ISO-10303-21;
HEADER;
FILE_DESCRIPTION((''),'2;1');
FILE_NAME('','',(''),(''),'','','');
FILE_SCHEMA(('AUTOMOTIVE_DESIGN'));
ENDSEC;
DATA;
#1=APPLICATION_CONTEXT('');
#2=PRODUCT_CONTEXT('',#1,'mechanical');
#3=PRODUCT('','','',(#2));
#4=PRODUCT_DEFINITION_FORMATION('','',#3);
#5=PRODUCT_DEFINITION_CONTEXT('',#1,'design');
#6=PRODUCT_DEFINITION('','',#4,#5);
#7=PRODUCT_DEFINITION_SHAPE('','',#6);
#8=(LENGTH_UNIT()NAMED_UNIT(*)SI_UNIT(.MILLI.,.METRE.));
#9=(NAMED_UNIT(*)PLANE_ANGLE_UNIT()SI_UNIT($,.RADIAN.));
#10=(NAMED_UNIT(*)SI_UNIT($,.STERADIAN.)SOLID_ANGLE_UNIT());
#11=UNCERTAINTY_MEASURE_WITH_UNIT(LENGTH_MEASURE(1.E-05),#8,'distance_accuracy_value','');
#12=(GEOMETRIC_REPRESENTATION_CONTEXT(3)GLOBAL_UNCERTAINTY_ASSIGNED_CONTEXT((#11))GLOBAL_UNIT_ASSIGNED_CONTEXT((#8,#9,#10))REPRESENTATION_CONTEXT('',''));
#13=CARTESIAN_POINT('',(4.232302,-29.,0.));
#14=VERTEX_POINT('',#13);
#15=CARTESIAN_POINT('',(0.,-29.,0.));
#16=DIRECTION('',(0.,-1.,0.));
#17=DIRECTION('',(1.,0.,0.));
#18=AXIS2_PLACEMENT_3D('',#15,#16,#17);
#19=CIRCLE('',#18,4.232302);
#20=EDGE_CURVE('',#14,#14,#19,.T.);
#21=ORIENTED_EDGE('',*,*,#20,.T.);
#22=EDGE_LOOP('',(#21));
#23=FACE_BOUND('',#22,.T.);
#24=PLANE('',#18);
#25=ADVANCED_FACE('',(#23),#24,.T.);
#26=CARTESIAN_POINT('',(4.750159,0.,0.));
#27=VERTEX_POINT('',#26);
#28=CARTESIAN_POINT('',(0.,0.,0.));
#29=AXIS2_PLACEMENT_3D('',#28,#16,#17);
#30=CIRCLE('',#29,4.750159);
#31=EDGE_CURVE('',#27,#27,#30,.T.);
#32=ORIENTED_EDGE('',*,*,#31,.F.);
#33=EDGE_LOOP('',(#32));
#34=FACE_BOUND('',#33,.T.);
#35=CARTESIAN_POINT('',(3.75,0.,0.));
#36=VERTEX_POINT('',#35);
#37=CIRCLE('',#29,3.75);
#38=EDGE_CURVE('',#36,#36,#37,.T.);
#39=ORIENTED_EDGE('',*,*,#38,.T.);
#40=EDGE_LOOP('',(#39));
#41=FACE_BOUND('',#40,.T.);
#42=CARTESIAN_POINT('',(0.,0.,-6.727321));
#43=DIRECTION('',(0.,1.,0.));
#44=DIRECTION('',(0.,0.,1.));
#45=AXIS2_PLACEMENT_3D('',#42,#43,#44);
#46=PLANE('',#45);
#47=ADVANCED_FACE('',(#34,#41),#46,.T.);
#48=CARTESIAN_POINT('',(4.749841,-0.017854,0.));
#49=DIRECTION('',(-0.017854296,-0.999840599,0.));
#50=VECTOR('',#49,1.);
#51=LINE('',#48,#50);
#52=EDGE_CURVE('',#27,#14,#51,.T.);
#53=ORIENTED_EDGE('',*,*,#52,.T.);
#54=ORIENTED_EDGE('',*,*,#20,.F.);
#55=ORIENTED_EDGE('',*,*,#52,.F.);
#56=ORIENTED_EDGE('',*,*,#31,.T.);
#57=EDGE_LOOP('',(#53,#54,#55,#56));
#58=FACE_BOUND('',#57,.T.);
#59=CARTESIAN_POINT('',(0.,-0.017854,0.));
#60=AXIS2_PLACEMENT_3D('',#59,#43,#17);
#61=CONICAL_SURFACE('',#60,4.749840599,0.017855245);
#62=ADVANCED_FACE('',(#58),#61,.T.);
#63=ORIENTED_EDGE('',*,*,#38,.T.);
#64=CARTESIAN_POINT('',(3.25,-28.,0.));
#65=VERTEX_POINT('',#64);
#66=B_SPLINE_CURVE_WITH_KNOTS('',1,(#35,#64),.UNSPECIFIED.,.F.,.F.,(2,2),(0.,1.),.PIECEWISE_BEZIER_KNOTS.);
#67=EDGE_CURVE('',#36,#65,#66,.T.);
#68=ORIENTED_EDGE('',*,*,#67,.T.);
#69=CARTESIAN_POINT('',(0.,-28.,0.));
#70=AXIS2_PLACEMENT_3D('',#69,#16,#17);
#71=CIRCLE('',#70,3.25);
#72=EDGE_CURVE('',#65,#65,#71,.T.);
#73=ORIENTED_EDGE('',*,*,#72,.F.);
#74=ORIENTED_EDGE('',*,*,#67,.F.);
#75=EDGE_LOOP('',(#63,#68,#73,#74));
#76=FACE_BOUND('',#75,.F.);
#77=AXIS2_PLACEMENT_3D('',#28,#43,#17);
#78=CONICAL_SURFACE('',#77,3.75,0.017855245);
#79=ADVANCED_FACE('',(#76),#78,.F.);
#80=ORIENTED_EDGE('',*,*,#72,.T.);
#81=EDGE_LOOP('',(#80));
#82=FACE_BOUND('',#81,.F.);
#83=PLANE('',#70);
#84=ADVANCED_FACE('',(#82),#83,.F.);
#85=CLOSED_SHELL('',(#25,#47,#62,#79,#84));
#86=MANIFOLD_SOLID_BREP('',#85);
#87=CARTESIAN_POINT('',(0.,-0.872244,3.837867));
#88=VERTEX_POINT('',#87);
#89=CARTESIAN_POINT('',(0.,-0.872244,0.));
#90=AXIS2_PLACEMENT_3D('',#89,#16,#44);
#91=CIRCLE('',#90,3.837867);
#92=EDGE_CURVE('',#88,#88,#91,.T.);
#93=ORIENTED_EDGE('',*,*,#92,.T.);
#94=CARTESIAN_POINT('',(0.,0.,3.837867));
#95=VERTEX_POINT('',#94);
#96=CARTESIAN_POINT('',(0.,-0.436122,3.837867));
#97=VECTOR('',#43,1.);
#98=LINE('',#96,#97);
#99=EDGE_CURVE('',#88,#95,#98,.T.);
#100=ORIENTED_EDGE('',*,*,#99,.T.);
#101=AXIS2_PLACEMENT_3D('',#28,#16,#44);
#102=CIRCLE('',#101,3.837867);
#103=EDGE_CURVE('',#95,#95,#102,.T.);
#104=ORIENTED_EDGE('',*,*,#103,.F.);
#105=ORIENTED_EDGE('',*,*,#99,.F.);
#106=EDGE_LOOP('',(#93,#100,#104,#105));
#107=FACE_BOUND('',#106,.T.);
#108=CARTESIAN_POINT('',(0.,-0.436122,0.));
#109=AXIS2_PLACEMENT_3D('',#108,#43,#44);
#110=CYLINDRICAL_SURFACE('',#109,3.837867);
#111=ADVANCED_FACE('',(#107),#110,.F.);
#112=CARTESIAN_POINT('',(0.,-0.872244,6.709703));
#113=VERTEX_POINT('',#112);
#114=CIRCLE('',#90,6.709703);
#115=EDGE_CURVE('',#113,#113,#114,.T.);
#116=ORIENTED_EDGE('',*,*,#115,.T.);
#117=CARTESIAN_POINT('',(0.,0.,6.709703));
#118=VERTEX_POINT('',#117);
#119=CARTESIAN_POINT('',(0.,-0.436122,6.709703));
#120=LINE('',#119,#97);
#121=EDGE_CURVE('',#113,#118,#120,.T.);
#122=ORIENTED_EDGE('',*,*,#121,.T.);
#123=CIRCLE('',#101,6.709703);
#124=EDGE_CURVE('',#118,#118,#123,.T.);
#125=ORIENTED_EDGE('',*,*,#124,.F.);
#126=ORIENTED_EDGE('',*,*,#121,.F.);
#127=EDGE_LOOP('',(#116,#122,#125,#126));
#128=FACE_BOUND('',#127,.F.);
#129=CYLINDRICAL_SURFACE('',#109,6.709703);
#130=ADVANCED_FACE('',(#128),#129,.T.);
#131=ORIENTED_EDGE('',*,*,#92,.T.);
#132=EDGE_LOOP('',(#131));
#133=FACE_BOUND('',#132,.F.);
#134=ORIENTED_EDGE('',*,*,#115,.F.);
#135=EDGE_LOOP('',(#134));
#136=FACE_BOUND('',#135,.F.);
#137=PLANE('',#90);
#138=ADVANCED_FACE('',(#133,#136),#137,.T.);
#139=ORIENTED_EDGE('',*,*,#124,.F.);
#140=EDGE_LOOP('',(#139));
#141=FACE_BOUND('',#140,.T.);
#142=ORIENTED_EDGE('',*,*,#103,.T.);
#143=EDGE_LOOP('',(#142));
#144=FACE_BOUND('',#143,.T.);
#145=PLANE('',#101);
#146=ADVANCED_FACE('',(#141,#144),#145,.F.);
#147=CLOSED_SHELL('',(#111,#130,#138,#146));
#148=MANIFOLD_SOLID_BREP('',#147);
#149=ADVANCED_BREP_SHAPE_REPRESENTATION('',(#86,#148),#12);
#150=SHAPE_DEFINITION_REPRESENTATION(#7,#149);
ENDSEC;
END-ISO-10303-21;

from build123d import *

# Parameters (mm, degrees)
F0_R     = 3.75
F2_R     = 3.25
F4_W     = 0.8722444763
F4_H     = 2.8718363028
F6_T     = 1
F7_W     = 1.1980372947
F7_H     = 13.454537373
F8_DEPTH = 12.5


with BuildPart() as f3:
    # F0 (on Front) → F3 section 0
    with BuildSketch(Plane.XZ):
        Circle(F0_R)
    # F2 (on offset) → F3 section 1
    with BuildSketch(Plane.XZ.offset(28)):
        Circle(F2_R)
    loft()

    # F6 (hollow, outwards: the wall grows on the outside; the body as it was is the cavity)
    f6_inside = f3.part
    offset(amount=F6_T, kind=Kind.INTERSECTION)
    add(f6_inside, mode=Mode.SUBTRACT)

    # F7 (on Right) → F8 (cut, symmetric)
    with BuildSketch(Plane.YZ):
        with Locations((0.5990186473, -5.23869e-05)):
            Rectangle(F7_W, F7_H)
    extrude(amount=F8_DEPTH, both=True, mode=Mode.SUBTRACT)


with BuildPart() as f5:
    # F4 (on Right) → F5 (revolve)
    with BuildSketch(Plane.YZ):
        with Locations((-0.4361222382, 5.2737850929)):
            Rectangle(F4_W, F4_H)
    revolve(axis=Axis((0, 0, 0), (0, -1, 0)))


solid = Compound([f3.part, f5.part])
